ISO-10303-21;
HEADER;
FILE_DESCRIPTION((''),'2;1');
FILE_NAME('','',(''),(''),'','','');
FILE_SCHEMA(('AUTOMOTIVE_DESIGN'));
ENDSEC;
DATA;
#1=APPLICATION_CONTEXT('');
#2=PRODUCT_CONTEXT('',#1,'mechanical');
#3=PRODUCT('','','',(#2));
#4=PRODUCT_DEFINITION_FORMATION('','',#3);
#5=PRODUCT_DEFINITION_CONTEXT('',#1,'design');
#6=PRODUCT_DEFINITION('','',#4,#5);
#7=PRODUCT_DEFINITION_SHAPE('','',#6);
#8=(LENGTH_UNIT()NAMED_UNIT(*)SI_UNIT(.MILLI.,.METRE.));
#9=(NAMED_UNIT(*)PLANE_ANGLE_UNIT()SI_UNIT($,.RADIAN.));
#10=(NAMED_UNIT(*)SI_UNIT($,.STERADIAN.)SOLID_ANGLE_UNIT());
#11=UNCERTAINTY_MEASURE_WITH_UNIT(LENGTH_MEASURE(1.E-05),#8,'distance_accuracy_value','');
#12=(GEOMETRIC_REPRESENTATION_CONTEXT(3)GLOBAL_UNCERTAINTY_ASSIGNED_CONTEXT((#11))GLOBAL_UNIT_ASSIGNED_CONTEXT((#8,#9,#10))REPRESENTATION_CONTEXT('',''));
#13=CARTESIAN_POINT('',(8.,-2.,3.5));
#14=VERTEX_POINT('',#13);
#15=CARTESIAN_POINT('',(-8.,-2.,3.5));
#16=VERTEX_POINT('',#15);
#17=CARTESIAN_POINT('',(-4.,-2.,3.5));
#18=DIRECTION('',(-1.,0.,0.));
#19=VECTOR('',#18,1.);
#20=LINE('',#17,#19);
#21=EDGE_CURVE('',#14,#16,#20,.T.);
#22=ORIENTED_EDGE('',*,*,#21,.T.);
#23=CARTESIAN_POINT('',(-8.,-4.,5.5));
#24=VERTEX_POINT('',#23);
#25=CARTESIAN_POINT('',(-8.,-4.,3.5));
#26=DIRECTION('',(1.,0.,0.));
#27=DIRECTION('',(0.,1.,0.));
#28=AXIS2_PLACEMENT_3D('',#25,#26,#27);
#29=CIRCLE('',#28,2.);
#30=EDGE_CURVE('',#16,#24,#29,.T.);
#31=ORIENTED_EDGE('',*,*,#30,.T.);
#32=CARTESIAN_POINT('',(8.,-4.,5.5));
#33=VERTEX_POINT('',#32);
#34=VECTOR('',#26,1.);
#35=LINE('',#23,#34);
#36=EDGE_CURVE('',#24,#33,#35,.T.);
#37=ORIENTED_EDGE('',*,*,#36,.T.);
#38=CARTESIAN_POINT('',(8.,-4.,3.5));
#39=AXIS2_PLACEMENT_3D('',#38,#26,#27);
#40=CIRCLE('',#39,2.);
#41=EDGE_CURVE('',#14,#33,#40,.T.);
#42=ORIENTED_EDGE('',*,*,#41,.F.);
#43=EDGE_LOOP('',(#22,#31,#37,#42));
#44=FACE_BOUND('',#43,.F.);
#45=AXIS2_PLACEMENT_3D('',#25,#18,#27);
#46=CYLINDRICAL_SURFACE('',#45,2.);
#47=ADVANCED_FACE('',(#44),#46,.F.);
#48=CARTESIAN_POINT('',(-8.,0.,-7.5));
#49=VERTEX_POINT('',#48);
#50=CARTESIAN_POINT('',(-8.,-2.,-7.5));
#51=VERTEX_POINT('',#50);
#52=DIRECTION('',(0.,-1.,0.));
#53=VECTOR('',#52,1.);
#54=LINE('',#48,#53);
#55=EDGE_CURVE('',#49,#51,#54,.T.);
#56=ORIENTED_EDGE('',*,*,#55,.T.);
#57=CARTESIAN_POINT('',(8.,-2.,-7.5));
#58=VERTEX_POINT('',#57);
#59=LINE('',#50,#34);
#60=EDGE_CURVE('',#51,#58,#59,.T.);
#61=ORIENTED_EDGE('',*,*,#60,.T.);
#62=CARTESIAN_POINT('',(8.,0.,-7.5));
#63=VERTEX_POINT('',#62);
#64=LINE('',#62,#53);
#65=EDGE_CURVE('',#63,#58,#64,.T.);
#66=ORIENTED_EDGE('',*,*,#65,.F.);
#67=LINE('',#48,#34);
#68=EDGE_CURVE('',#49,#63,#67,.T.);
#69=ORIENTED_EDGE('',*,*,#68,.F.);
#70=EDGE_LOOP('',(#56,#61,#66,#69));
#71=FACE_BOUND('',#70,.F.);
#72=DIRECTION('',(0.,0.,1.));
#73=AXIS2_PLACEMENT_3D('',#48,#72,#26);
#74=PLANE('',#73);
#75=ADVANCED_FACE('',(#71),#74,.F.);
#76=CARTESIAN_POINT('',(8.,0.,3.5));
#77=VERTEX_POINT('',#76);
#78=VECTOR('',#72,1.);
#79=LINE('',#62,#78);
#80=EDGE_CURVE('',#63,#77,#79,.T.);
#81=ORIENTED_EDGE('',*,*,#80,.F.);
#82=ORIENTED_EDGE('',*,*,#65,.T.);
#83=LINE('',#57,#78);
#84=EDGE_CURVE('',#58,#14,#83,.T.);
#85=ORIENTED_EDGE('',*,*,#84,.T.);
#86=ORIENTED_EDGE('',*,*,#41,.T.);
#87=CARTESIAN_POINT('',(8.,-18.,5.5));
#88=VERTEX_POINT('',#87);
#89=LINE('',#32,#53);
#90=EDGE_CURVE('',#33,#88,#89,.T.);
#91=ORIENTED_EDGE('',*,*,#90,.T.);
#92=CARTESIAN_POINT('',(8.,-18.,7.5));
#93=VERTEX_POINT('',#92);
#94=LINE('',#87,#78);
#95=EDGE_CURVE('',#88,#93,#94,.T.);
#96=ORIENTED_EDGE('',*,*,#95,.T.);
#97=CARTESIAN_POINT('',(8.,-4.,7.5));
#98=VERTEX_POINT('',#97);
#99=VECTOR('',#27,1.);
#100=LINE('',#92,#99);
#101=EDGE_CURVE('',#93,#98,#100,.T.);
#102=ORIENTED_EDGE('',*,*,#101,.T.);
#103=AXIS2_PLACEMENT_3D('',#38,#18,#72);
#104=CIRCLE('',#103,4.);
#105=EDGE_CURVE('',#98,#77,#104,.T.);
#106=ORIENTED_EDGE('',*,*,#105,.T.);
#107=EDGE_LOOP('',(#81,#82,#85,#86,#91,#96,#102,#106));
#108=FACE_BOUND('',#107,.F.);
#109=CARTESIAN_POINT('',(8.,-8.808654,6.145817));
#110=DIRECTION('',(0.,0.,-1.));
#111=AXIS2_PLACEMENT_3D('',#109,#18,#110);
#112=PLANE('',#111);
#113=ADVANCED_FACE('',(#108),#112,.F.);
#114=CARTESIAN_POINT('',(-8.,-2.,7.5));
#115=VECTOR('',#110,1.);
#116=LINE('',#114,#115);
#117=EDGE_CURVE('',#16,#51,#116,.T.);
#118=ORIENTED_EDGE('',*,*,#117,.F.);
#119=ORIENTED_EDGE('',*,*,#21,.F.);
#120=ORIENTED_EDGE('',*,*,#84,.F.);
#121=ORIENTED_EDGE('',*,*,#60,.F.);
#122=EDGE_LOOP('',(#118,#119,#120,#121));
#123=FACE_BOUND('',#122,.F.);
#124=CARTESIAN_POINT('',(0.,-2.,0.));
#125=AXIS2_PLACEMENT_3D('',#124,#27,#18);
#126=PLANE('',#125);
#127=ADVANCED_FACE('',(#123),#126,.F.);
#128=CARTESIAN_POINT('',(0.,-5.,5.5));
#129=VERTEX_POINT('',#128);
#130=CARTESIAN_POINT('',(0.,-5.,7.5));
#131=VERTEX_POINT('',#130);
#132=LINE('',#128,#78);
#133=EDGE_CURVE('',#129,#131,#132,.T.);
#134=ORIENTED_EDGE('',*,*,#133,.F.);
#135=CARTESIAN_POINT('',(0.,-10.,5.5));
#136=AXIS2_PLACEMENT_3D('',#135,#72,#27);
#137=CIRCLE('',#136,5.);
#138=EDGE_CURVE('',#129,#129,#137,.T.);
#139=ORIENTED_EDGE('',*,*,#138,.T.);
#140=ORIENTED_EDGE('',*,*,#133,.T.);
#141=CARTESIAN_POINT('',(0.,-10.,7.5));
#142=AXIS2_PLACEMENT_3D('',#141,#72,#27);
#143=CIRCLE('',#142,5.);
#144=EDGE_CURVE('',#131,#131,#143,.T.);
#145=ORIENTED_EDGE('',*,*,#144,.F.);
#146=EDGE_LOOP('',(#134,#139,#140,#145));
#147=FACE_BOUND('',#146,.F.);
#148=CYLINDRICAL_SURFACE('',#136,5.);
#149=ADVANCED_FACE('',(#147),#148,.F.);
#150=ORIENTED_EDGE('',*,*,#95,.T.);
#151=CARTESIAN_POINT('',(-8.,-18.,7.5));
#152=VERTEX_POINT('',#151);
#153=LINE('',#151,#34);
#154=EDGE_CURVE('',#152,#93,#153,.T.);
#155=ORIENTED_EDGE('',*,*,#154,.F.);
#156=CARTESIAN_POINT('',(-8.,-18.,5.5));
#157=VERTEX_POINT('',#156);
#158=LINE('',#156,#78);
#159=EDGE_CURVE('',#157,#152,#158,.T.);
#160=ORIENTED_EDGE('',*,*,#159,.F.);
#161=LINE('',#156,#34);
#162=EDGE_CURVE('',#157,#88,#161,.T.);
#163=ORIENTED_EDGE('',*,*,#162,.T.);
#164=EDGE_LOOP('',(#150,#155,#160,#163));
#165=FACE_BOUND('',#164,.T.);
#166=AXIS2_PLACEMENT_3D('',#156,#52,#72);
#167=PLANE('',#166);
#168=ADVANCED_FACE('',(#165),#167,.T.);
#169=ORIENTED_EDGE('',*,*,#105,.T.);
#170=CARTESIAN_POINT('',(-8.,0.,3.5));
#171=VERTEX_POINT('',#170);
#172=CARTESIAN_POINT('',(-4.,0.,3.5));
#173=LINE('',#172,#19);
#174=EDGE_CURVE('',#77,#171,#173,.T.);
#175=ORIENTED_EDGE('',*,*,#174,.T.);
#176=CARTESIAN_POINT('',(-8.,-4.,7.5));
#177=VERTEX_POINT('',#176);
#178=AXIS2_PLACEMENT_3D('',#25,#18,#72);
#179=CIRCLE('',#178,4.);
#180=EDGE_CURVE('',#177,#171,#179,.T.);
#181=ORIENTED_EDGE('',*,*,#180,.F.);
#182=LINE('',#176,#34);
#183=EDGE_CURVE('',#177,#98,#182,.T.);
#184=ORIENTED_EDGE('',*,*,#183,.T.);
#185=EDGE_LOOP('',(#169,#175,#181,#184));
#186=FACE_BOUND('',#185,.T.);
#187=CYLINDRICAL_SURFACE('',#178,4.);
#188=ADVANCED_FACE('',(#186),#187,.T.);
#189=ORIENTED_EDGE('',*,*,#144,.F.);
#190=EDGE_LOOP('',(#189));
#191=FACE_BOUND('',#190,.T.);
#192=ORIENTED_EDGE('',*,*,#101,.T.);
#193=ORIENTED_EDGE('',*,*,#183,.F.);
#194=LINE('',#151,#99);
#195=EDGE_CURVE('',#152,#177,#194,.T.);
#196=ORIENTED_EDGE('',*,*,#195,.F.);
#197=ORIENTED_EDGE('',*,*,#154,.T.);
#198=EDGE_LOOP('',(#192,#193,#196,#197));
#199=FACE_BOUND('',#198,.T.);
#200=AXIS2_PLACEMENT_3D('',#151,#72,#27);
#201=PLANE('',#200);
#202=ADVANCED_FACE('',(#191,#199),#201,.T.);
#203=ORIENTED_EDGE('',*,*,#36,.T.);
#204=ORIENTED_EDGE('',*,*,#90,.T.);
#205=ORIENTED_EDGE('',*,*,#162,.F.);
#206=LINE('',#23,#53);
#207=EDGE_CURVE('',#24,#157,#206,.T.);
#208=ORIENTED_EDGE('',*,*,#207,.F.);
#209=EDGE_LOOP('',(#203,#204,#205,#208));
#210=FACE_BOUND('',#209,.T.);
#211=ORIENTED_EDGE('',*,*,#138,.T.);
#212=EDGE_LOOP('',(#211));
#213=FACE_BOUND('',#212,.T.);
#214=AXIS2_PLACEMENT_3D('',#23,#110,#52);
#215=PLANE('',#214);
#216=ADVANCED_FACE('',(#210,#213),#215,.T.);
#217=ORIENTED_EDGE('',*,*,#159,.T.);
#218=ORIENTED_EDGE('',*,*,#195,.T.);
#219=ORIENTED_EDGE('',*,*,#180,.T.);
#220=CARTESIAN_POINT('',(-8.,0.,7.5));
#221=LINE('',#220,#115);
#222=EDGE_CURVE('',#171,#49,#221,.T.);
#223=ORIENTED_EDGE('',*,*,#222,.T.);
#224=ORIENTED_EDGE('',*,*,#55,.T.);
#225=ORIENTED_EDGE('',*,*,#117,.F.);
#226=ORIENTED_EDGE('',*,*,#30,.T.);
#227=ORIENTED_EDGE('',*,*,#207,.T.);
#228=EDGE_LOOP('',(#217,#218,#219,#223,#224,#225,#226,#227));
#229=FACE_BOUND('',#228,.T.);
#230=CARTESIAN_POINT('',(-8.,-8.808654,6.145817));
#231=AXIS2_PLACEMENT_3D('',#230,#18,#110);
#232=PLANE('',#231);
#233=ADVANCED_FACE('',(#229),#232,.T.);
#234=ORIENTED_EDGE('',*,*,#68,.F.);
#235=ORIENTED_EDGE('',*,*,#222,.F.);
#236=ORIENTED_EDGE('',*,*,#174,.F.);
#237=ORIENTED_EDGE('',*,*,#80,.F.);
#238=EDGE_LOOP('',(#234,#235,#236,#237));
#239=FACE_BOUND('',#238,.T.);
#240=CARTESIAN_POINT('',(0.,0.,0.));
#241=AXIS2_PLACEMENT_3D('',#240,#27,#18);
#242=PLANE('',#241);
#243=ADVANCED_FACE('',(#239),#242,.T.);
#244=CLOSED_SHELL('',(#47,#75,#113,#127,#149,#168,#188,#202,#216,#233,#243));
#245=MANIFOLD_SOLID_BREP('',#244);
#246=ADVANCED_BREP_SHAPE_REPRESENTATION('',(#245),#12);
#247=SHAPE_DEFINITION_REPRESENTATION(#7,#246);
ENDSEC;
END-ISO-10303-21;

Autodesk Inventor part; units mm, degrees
ref_plane "YZ Plane" through (0, 0, 0) normal (1, 0, 0) x (0, 1, 0)
ref_plane "XZ Plane" through (0, 0, 0) normal (0, 1, 0) x (-1, 0, 0)
ref_plane "XY Plane" through (0, 0, 0) normal (0, 0, 1) x (1, 0, 0)
sketch "Sketch1" plane through (0, 0, 0) normal (0, 1, 0) x (-1, 0, 0)
  line L0 (-8, 7.5) -> (8, 7.5)
  line L1 (8, 7.5) -> (8, -7.5)
  line L2 (8, -7.5) -> (-8, -7.5)
  line L3 (-8, -7.5) -> (-8, 7.5)
  line L4 (-8, 7.5) -> (8, -7.5) construction
  line L5 (8, 7.5) -> (-8, -7.5) construction
  point P0 (0, 0)
  dimension "d0" = 16
  dimension "d1" = 15
extrude "Extrusion1" add sketch "Sketch1" against normal blind 2
sketch "Sketch2" plane through (-8, 0, 5.5) normal (0, 0, 1) x (1, 0, 0)
  line L0 (16, 0) -> (0, 0)
  line L1 (0, 0) -> (0, -18)
  line L2 (0, -18) -> (16, -18)
  line L3 (16, -18) -> (16, 0)
edge flange "Flange1" height 18 angle 90 thickness 2 bend radius 2 thickness toward (0, 0, 1) relief tear relief width 2 relief depth 1 edges at (0, -2, 7.5) wall of the first edge with corners at (8, 0, 5.5) (-8, 0, 5.5) (-8, -18, 5.5) (8, -18, 5.5)
bend "Bend1"
corner "Corner1"
sketch "Sketch3" plane through (8, -18, 5.5) normal (0, 0, -1) x (-1, 0, 0)
  line L0 (16, 14) -> (0, 14) projected
  line L1 (0, 14) -> (0, 0) projected
  line L2 (0, 0) -> (16, 0) projected
  line L3 (16, 14) -> (16, 0) projected
  line L4 (16, 14) -> (0, 14) projected
  line L5 (16, 16) -> (16, 14) projected
  line L6 (0, 16) -> (16, 16) projected
  line L7 (0, 16) -> (0, 14) projected
  line L8 (0, 0) -> (16, 0) projected
  line L9 (8, 0) -> (8, 16) construction
  point P0 (8, 18)
  point P1 (8, 8)
  dimension "d15" = 8
hole "Hole1" at (0, -10, 5.5) direction (0, 0, 1) diameter 10 end through all
equation "\"d21\" = Thickness"
equation "\"d4\" = Thickness"
equation "\"d5\" = BendReliefWidth"
equation "\"d6\" = BendReliefDepth"
equation "\"d7\" = MinimumRemnant"
equation "\"d8\" = TransitionRadius"
equation "\"d11\" = BendRadius"
equation "\"d12\" = CornerReliefSize"
equation "\"d13\" = GapSize"
equation "\"d14\" = JacobiRadiusSize"
equation "\"BendRadius\" = Thickness"
equation "\"BendReliefWidth\" = Thickness"
equation "\"BendReliefDepth\" = 0.5 * Thickness"
equation "\"CornerReliefSize\" = 4 * Thickness"
equation "\"MinimumRemnant\" = 2 * Thickness"
equation "\"TransitionRadius\" = BendRadius"
equation "\"JacobiRadiusSize\" = BendRadius"
equation "\"GapSize\" = Thickness"
equation "\"Thickness\" = 2"
properties part number "WheelMount No Motor"
